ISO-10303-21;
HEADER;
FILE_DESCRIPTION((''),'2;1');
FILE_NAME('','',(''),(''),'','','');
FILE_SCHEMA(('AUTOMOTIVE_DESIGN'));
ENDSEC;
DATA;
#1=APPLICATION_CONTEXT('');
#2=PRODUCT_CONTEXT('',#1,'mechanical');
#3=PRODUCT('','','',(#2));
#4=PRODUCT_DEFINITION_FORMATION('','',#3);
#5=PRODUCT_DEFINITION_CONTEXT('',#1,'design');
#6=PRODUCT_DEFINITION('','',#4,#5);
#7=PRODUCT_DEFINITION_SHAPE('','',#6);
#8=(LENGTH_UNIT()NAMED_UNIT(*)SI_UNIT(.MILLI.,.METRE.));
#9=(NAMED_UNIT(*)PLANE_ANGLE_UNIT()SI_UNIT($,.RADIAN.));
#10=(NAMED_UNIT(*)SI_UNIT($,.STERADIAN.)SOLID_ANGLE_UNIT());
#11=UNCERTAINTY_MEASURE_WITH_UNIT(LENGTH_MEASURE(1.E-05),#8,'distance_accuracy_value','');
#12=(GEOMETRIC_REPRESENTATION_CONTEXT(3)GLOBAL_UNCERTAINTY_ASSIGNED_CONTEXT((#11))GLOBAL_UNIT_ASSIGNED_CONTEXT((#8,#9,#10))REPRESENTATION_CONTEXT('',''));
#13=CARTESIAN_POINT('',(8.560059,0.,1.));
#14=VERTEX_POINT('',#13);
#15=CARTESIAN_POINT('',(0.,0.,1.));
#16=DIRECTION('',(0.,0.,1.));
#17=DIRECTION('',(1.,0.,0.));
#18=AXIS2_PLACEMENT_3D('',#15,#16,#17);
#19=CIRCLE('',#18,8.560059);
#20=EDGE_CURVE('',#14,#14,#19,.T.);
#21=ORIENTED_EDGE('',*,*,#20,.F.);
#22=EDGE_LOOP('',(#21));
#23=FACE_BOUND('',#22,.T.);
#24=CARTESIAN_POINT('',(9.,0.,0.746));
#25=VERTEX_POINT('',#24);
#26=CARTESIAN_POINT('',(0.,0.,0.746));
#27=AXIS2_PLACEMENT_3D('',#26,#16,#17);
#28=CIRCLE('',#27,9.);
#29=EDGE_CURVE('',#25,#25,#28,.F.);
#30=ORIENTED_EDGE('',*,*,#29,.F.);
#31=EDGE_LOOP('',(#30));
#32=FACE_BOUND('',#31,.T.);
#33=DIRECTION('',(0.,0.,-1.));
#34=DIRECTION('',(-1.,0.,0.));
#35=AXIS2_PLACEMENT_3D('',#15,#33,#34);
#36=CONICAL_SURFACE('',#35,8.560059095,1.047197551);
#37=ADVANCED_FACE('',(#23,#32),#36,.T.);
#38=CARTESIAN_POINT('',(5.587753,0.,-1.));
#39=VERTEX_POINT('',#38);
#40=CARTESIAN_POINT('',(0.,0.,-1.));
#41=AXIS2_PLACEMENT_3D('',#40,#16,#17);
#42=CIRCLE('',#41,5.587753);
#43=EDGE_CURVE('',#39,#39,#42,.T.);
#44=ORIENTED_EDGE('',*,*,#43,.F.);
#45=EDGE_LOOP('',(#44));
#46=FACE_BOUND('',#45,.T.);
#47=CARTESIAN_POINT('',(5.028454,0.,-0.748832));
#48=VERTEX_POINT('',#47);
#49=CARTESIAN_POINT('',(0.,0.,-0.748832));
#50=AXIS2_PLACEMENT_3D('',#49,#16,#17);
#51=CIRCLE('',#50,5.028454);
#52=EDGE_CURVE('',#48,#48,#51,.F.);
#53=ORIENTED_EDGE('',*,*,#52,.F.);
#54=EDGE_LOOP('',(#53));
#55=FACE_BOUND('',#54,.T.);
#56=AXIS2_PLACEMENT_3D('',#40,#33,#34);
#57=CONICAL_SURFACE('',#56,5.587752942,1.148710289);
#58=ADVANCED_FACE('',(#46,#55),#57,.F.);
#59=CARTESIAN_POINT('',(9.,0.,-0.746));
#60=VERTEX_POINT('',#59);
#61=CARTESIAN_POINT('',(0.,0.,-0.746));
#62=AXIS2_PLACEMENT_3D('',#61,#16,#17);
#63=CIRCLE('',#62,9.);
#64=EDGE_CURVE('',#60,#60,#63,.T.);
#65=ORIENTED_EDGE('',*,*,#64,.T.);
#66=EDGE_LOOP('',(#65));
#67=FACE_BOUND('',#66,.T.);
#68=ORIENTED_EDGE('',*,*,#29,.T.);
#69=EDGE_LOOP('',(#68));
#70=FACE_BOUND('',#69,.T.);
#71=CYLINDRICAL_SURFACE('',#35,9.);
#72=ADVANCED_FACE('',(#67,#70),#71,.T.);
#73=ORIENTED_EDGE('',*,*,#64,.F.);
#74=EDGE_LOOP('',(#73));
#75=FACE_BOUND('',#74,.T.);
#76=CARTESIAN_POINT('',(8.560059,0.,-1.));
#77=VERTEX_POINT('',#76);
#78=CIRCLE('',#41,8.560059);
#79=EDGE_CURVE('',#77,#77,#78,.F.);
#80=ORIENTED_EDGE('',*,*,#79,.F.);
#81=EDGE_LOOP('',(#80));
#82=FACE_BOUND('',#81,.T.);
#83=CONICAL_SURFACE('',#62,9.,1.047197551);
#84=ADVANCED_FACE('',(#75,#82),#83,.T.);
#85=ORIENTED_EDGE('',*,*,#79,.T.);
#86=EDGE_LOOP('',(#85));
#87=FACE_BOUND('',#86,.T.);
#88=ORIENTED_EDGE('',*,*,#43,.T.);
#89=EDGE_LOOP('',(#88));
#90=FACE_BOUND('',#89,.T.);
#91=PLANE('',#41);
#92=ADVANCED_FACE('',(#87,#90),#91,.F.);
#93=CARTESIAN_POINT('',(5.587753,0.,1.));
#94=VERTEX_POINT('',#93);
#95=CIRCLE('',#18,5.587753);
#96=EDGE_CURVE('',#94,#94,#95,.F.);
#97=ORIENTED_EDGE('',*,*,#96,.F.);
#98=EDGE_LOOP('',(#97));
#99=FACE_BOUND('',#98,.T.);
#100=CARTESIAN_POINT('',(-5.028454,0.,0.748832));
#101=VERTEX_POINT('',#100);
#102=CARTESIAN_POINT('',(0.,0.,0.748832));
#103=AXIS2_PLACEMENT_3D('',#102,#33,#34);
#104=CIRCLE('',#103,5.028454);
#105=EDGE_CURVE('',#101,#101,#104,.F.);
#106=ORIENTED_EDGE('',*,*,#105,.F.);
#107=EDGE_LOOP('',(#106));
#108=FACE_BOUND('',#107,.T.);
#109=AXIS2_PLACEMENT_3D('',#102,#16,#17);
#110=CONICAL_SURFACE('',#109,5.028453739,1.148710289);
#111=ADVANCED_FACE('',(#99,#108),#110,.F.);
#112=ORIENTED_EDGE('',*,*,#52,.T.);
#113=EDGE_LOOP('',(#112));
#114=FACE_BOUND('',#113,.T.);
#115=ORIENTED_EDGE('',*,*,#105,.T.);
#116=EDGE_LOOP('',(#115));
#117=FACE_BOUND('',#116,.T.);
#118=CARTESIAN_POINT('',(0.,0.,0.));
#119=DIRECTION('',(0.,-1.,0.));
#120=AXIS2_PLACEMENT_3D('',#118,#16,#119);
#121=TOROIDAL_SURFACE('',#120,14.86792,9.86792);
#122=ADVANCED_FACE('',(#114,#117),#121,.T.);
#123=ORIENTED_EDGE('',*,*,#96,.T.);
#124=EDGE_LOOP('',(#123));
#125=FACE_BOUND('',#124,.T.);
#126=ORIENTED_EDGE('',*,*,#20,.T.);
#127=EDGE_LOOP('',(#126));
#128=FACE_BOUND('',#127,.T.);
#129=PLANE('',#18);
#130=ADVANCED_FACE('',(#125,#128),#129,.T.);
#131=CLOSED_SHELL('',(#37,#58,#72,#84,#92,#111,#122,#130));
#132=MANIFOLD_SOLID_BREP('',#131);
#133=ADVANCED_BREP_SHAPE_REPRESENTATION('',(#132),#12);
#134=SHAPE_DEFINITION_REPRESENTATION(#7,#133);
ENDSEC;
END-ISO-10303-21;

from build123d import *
from OCP.BRepFilletAPI import BRepFilletAPI_MakeChamfer

# Parameters (mm, degrees)
BOSS_EXTRUDE1_DEPTH      = 1
BOSS_EXTRUDE1_DEPTH_BACK = 1
SKETCH3_R                = 9
SKETCH3_R_2              = 5
CHAMFER1_SIZE            = 0.254
CHAMFER1_SIZE2           = 0.439940905
CHAMFER2_SIZE            = 0.536952942


with BuildPart() as part:
    # Sketch3 → Boss-Extrude1 (new, two sides: drawn at the far end of the back side and taken through both)
    with BuildSketch(Plane.XY.offset(-BOSS_EXTRUDE1_DEPTH_BACK)):
        Circle(SKETCH3_R)
        Circle(SKETCH3_R_2, mode=Mode.SUBTRACT)
    extrude(amount=BOSS_EXTRUDE1_DEPTH + BOSS_EXTRUDE1_DEPTH_BACK)

    # Chamfer1: one chamfer whose edges measure the first distance from different faces: ONE call of the kernel's chamfer builder (chamfer() names one face for all edges)
    chamfer1_edges_1 = [part.edges().sort_by_distance(p)[0] for p in [
        (-9, 0, 1),
    ]]
    chamfer1_side_1 = [part.faces().sort_by_distance(p)[0] for p in [
        (-9, 0, 0.5),
    ]]
    chamfer1_edges_2 = [part.edges().sort_by_distance(p)[0] for p in [
        (-9, 0, -1),
    ]]
    chamfer1_side_2 = [part.faces().sort_by_distance(p)[0] for p in [
        (-9, 0, -0.5),
    ]]
    chamfer1 = BRepFilletAPI_MakeChamfer(part.part.solid().wrapped)
    for e in chamfer1_edges_1:
        chamfer1.Add(CHAMFER1_SIZE, CHAMFER1_SIZE2, e.wrapped, chamfer1_side_1[0].wrapped)  # the first distance lies on this face
    for e in chamfer1_edges_2:
        chamfer1.Add(CHAMFER1_SIZE, CHAMFER1_SIZE2, e.wrapped, chamfer1_side_2[0].wrapped)  # the first distance lies on this face
    add(Compound.cast(chamfer1.Shape()), mode=Mode.REPLACE)

    # Sketch4 → Cut-Revolve1 (revolve, cut)
    with BuildSketch(Plane(origin=(0, 0, 0), x_dir=(0, 0, -1), z_dir=(1, 0, 0)), mode=Mode.PRIVATE) as cut_revolve1_sk:
        with BuildLine():
            Line((-1, 4.9492), (-1, 5.0508))
            ThreePointArc((-1, 5.0508), (0, 5), (1, 5.0508))
            Line((1, 5.0508), (1, 4.9492))
            Line((1, 4.9492), (-1, 4.9492))
        make_face()
    revolve(cut_revolve1_sk.sketch.rotate(Axis((0, 0, 1), (0, 0, -1)), 90), axis=Axis((0, 0, 1), (0, 0, -1)), mode=Mode.SUBTRACT)

    # Chamfer2
    # the kernel refuses this chamfer: 0.536952942, 0.254 mm, written as the material it takes off along each edge
    with BuildSketch(Plane(origin=(0, 0, -1), x_dir=(1, 0, 0), z_dir=(0, 1, 0))) as chamfer2_piece_1:
        with BuildLine():
            Line((5.0508 + CHAMFER2_SIZE, 0), (5.028453739, -0.251168371))
            ThreePointArc((5.028453739, -0.251168371), (5.038361074, -0.130738), (5.0508, 0))
            Line((5.0508, 0), (5.0508 + CHAMFER2_SIZE, 0))
        make_face()
    revolve(axis=Axis((0, 0, -1), (0, 0, -1)), mode=Mode.SUBTRACT)
    with BuildSketch(Plane(origin=(0, 0, 1), x_dir=(1, 0, 0), z_dir=(0, 1, 0))) as chamfer2_piece_2:
        with BuildLine():
            Line((5.0508 + CHAMFER2_SIZE, 0), (5.028453739, 0.251168371))
            ThreePointArc((5.028453739, 0.251168371), (5.038361074, 0.130738), (5.0508, 0))
            Line((5.0508, 0), (5.0508 + CHAMFER2_SIZE, 0))
        make_face()
    revolve(axis=Axis((0, 0, 1), (0, 0, -1)), mode=Mode.SUBTRACT)


solid = part.part
